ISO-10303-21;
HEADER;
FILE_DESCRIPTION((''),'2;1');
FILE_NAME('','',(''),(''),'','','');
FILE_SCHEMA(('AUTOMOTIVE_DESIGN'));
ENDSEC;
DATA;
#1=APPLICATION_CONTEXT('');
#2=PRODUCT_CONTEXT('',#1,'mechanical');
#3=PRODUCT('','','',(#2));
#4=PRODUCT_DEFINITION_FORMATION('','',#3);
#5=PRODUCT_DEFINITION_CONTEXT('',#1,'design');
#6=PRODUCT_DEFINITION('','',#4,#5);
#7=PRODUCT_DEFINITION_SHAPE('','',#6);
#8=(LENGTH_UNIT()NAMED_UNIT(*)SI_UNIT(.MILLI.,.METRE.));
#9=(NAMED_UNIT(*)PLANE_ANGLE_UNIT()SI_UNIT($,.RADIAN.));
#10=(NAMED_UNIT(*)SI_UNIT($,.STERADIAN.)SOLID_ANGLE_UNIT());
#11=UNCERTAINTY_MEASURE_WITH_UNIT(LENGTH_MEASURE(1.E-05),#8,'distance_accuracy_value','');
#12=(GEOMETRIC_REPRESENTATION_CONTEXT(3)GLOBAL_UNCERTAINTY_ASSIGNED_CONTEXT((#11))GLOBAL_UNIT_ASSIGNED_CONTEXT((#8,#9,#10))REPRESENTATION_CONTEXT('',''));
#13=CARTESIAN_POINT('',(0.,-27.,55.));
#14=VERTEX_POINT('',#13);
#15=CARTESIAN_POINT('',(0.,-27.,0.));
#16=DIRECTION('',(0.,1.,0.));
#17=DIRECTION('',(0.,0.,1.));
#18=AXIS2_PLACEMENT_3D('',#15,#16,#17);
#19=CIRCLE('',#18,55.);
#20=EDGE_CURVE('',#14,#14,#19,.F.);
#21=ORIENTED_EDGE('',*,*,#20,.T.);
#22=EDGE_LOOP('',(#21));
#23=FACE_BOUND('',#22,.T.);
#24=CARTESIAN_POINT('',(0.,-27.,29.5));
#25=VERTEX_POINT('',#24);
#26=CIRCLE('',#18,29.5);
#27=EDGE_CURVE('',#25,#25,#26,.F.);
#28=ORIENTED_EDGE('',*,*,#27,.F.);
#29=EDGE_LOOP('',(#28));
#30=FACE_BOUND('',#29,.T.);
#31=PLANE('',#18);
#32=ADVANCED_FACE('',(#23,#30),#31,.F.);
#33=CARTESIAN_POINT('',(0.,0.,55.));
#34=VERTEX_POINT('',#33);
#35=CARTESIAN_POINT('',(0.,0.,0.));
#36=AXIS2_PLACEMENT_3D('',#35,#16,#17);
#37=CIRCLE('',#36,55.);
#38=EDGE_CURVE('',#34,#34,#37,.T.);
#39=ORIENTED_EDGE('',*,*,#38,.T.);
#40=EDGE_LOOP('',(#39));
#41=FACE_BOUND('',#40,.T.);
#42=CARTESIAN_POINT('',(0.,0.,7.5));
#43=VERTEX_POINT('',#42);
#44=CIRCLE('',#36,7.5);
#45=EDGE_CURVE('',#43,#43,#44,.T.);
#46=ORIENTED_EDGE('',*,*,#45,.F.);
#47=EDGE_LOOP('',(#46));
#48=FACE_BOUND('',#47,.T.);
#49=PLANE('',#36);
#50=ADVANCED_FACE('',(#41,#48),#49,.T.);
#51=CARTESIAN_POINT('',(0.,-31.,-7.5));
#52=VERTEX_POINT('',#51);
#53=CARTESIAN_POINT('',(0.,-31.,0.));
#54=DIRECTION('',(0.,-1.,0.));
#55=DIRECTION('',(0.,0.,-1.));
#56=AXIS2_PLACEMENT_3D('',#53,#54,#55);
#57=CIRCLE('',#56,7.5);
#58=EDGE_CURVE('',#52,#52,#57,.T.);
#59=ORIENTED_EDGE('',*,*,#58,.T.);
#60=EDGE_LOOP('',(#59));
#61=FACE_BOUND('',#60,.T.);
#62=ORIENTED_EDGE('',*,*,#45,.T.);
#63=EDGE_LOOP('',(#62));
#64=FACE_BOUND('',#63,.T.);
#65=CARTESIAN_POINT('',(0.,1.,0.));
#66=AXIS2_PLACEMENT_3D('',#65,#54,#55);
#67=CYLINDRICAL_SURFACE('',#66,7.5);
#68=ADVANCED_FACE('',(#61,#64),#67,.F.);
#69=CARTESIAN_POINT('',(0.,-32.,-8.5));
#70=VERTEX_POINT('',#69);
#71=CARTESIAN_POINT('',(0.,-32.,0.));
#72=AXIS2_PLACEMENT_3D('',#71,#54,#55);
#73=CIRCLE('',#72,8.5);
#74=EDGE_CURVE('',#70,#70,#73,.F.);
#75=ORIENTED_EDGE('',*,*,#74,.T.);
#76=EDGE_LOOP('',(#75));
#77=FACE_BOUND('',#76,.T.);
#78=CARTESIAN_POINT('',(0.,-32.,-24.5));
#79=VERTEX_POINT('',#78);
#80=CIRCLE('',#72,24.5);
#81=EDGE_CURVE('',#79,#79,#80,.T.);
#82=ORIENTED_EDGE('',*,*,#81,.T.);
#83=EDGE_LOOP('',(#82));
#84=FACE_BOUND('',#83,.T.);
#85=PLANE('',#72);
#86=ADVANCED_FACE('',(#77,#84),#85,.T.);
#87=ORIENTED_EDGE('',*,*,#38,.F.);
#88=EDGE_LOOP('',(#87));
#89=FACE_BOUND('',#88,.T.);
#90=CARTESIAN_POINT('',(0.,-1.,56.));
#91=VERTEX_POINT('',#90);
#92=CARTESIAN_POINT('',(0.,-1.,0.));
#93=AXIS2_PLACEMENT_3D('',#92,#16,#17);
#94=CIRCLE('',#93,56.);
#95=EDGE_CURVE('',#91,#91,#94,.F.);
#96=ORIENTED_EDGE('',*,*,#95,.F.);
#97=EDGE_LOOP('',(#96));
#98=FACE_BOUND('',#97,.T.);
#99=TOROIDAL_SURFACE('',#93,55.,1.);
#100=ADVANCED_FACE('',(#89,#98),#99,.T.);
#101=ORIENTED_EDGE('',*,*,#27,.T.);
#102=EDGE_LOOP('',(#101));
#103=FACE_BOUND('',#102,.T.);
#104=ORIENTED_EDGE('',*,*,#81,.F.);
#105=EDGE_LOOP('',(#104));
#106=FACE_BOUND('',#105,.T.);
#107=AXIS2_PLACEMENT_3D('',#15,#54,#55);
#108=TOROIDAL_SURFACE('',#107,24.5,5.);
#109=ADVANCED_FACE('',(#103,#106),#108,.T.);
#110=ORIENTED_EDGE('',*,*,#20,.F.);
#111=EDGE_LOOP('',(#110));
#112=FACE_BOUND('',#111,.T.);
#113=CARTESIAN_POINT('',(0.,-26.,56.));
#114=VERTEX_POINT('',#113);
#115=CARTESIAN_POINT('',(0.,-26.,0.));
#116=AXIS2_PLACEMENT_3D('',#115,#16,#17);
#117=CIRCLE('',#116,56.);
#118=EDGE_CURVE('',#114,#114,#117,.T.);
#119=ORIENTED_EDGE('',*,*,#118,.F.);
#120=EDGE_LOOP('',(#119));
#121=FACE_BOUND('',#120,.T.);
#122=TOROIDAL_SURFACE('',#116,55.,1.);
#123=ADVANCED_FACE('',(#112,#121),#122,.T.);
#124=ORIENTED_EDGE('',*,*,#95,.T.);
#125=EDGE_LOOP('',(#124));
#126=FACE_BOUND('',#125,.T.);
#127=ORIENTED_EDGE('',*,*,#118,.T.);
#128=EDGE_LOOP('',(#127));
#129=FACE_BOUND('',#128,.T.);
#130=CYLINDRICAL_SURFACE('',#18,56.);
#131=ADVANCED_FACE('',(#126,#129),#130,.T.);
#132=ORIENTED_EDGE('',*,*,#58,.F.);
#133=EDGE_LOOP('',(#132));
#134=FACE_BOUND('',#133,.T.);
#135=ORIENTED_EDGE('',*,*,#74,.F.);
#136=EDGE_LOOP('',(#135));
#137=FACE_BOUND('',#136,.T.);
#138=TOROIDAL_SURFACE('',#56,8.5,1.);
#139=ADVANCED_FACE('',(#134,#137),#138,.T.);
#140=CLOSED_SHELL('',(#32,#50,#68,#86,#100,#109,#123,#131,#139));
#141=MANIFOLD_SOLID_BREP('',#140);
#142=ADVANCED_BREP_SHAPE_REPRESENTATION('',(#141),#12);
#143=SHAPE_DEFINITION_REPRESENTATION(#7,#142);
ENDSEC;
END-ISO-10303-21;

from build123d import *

# Parameters (mm, degrees)
SKETCH_1_R          = 56
EXTRUDE_1_DEPTH     = 27
SKETCH_3_R          = 29.5
EXTRUDE_2_DEPTH     = 5
FILLET_1_R          = 5
SKETCH_6_R          = 7.5
CUT_EXTRUDE_1_DEPTH = 33
FILLET_2_R          = 1
FILLET_3_R          = 1


with BuildPart() as part:
    # Эскиз1 → Бобышка-Вытянуть1 (new body)
    with BuildSketch(Plane(origin=(0, 0, 0), x_dir=(1, 0, 0), z_dir=(0, 1, 0))):
        with Locations(Location((0, 0, 0), (0, 0, 270))):
            Circle(SKETCH_1_R)
    extrude(amount=-EXTRUDE_1_DEPTH)

    # Эскиз3 → Бобышка-Вытянуть2 (add)
    with BuildSketch(Plane(origin=(0, -27, 0), x_dir=(-1, 0, 0), z_dir=(0, -1, 0))):
        with Locations(Location((0, 0, 0), (0, 0, 270))):
            Circle(SKETCH_3_R)
    extrude(amount=EXTRUDE_2_DEPTH)

    # Скругление1
    fillet_1_edges = [part.edges().sort_by_distance(p)[0] for p in [
        (0, -32, -29.5),
    ]]
    fillet(fillet_1_edges, radius=FILLET_1_R - 0.0001)  # a hair under: the kernel refuses the full size

    # Эскиз6 → Вырез-Вытянуть1 (cut)
    with BuildSketch(Plane.XZ.offset(32)):
        with Locations(Location((0, 0, 0), (0, 0, 270))):
            Circle(SKETCH_6_R)
    extrude(amount=-CUT_EXTRUDE_1_DEPTH, mode=Mode.SUBTRACT)

    # Скругление2
    fillet_2_edges = [part.edges().sort_by_distance(p)[0] for p in [
        (0, -32, 7.5),
    ]]
    fillet(fillet_2_edges, radius=FILLET_2_R)

    # Скругление3
    fillet_3_edges = [part.edges().sort_by_distance(p)[0] for p in [
        (0, 0, -56),
        (0, -27, -56),
    ]]
    fillet(fillet_3_edges, radius=FILLET_3_R)


solid = part.part
